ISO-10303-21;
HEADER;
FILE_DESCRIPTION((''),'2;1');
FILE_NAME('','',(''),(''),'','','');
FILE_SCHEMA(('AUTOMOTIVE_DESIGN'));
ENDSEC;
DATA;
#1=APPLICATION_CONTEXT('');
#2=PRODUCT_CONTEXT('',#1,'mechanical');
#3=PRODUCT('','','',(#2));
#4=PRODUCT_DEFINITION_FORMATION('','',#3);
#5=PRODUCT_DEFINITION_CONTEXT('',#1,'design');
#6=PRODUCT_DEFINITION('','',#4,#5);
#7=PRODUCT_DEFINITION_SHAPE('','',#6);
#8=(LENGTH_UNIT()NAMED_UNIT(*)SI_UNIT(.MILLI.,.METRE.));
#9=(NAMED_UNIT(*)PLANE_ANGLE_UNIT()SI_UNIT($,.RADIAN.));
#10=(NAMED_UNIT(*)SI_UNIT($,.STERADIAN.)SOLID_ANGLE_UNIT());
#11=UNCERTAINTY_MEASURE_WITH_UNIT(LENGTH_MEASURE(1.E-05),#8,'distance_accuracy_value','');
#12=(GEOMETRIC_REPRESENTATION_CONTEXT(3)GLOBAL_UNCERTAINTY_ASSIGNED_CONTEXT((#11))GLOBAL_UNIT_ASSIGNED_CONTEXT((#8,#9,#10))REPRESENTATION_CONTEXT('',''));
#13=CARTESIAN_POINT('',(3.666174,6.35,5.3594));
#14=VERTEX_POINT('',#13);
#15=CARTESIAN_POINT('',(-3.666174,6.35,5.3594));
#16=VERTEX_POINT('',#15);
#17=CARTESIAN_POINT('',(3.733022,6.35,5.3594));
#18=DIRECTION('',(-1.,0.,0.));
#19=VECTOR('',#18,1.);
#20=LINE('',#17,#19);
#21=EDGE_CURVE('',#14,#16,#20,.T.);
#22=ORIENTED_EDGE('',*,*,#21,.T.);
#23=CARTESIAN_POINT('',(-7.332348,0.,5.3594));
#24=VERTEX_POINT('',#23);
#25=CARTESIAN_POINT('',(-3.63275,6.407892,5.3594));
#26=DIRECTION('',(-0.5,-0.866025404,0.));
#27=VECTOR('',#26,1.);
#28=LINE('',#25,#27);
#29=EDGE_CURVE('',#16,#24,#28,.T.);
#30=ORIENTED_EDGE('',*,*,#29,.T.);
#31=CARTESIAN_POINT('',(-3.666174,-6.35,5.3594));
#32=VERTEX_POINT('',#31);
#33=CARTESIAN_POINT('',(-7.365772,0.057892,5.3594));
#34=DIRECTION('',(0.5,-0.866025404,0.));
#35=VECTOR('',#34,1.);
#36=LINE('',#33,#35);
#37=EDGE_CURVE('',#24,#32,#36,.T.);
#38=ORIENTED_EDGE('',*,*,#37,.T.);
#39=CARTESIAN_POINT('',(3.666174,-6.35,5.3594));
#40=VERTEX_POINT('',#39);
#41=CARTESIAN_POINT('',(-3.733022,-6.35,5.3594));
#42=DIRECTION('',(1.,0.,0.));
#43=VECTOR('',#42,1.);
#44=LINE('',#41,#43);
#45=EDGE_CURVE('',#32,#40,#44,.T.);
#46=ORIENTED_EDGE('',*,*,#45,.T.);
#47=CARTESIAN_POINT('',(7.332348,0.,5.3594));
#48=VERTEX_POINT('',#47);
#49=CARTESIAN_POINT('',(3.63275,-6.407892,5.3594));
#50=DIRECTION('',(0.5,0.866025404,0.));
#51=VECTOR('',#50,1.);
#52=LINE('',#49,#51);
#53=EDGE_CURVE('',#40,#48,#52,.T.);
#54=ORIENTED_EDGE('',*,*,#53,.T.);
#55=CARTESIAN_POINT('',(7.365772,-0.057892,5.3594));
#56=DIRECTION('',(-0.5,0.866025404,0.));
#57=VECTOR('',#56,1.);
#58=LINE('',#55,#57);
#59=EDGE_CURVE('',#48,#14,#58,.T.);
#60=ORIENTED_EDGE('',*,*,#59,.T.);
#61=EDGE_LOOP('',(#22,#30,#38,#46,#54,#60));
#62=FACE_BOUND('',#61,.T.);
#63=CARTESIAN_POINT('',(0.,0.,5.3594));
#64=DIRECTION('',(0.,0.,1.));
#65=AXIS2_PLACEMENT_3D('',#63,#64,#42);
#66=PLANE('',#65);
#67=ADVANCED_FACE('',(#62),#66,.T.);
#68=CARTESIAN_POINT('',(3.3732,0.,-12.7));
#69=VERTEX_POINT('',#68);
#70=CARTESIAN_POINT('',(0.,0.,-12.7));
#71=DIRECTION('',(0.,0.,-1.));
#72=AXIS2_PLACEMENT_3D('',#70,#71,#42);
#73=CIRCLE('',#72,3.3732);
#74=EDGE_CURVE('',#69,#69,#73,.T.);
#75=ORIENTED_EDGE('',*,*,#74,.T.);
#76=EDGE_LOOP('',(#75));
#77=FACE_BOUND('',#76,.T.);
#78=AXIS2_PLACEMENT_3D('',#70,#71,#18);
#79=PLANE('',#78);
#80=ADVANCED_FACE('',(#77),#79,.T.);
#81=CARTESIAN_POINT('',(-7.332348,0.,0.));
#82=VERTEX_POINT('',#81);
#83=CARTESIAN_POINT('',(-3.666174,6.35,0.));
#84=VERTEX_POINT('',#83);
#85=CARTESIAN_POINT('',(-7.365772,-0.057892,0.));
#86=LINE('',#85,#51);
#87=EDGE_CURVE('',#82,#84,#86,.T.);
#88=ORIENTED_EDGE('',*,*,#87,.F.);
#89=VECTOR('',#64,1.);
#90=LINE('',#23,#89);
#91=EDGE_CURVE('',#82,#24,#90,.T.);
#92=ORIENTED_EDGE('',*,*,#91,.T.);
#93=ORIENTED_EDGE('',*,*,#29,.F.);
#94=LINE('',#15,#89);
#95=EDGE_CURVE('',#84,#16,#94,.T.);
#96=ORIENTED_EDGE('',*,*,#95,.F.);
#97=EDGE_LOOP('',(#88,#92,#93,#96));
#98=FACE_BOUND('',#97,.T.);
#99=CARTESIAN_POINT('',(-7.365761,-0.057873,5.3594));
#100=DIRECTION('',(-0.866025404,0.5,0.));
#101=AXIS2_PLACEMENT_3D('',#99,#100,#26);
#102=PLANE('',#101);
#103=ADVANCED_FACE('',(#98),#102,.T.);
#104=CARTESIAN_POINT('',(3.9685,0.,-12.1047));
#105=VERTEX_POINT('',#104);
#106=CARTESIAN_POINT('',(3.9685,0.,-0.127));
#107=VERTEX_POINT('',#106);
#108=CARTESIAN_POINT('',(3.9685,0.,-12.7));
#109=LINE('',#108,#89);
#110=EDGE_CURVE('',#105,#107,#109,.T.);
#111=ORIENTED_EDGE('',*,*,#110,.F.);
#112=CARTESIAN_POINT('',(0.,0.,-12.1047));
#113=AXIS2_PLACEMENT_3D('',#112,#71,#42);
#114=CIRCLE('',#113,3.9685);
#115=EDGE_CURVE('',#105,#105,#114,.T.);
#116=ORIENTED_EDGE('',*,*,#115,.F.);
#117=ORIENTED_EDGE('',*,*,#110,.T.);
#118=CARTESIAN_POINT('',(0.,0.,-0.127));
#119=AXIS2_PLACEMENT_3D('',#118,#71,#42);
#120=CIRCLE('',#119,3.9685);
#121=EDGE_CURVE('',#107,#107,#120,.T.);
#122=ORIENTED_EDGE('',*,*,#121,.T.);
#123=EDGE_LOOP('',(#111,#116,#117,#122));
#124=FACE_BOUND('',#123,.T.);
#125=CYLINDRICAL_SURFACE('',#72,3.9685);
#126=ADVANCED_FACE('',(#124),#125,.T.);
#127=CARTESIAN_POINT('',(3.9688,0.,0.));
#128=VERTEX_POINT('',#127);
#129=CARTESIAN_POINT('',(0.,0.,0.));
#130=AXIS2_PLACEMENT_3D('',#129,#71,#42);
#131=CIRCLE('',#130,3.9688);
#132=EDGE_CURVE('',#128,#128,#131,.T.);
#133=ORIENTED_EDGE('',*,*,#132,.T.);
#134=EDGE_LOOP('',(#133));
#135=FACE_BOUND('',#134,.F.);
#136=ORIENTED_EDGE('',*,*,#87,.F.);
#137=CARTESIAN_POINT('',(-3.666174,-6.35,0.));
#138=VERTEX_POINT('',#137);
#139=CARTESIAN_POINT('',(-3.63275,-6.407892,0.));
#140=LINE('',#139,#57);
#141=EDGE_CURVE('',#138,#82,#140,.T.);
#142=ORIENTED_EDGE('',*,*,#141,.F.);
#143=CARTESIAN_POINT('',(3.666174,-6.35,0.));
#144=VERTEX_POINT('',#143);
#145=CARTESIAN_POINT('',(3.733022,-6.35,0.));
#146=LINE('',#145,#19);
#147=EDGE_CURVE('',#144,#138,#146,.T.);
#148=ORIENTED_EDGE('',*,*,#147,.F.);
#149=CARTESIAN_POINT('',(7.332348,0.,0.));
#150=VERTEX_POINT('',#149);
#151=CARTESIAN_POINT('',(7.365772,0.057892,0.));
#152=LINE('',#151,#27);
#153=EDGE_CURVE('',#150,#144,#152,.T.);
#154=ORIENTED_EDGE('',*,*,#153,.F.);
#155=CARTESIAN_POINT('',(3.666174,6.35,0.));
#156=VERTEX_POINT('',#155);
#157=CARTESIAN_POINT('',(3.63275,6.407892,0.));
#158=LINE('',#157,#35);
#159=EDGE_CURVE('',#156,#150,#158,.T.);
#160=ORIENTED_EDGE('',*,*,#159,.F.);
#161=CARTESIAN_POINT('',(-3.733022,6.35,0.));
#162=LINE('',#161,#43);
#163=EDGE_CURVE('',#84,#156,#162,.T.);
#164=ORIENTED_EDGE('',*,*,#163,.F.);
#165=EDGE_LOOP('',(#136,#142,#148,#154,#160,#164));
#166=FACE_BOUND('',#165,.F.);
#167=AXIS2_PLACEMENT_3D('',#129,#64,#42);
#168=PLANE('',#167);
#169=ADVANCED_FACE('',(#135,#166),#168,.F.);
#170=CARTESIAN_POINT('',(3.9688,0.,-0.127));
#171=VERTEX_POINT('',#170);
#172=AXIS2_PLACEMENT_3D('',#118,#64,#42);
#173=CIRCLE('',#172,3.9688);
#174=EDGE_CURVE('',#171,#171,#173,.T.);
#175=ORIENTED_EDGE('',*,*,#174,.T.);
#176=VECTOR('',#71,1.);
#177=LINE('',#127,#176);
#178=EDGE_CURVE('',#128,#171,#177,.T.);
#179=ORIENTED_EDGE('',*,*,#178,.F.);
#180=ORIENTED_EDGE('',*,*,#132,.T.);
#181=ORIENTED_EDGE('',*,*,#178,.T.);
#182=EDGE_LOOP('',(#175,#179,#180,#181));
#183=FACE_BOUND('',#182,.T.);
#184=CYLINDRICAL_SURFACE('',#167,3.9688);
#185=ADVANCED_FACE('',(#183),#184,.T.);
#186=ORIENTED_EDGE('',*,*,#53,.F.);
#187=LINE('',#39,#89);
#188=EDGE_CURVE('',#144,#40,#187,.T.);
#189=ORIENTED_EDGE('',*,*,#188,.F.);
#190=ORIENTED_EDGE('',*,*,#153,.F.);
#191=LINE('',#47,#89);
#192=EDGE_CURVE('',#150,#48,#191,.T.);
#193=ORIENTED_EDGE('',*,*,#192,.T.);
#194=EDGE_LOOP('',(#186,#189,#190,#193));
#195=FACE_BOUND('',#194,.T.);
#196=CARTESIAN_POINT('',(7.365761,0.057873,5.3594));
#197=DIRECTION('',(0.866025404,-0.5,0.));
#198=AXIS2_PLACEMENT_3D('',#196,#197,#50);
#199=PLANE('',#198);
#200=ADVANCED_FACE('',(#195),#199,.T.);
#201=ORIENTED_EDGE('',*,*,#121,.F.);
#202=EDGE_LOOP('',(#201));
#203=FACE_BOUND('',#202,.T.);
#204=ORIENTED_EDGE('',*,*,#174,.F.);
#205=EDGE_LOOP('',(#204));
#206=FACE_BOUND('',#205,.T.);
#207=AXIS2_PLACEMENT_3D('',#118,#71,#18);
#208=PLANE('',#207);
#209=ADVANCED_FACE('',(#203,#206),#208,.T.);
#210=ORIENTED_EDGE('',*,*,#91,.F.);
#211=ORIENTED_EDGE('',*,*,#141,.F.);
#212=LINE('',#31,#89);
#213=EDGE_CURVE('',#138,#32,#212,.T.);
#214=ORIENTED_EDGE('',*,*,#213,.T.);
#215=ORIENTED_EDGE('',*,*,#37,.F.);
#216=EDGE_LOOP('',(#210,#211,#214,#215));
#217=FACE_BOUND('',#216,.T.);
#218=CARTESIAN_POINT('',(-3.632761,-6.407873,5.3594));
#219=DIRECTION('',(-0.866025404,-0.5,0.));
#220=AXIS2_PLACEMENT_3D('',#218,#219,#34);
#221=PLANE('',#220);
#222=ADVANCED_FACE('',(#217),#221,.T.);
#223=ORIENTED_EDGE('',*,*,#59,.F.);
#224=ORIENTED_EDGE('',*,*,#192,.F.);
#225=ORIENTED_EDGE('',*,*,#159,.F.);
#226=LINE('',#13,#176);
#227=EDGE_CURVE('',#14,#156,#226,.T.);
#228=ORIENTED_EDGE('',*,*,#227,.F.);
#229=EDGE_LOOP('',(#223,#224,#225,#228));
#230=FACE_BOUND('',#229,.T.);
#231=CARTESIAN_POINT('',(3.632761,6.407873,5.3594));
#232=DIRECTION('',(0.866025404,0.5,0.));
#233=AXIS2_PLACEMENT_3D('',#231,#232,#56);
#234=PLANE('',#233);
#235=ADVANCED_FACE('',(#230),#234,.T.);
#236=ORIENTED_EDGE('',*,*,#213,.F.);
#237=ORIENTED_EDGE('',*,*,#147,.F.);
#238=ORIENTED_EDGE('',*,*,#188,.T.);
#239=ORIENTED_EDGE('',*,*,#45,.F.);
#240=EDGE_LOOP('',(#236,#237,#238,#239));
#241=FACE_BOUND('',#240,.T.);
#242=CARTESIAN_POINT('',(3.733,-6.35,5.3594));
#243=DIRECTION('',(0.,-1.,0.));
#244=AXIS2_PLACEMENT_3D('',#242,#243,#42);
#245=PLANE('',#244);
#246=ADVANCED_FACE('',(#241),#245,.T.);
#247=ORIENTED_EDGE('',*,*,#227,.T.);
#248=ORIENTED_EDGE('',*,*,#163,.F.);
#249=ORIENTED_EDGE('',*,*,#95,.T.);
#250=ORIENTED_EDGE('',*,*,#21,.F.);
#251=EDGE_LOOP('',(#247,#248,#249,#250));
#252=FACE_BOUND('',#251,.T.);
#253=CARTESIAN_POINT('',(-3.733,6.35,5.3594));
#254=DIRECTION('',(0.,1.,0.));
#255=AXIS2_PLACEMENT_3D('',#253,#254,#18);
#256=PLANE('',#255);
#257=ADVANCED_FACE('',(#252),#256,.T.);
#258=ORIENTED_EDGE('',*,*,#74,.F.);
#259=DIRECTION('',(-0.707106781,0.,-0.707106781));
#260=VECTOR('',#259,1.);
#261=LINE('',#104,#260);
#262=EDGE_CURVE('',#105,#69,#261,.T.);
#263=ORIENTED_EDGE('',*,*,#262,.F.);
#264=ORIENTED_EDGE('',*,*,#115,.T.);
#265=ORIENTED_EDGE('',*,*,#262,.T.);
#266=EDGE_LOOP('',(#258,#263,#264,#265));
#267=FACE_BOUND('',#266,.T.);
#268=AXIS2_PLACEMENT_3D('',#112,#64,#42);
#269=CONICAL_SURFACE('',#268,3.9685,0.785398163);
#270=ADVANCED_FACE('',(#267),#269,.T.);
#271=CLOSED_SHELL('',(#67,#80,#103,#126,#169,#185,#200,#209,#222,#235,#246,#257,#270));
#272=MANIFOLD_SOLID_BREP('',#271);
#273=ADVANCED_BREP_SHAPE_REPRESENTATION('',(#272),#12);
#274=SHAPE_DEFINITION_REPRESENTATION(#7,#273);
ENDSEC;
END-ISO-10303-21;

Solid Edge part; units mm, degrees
sketch "Sketch1" plane through (0, 0, 0) normal (0, 0, 1) x (1, 0, 0)
  circle A0 centre (0, 0) radius 7.366
  dimension "D1" = 14.732
extrude "Protrusion1" add sketch "Sketch1" along normal blind 5.3594
sketch "Sketch2" plane through (0, 0, 0) normal (0, 0, -1) x (1, 0, 0)
  circle A0 centre (0, 0) radius 3.9688
extrude "Protrusion2" add sketch "Sketch2" along normal blind 12.7
sketch "Sketch3" plane through (0, 0, -12.7) normal (0, 0, -1) x (1, 0, 0)
  circle A0 centre (0, 0) radius 3.9685
extrude "Cutout1" cut sketch "Sketch3" against normal blind 12.573 flip side to cut
chamfer "Chamfer_1" distance 0.5953 angle 45 1 edges at (-3.9685, 0, -12.7)
sketch "Sketch4" plane through (0, 0, 5.3594) normal (0, 0, 1) x (1, 0, 0)
  line L0 (-3.733, 6.35) -> (3.733, 6.35)
  dimension "D1" = 12.7
extrude "Cutout2" cut sketch "Sketch4" against normal up to next material side at (0, 6.4, 5.3594)
pattern_circular "Pattern1" count 6 over 360 about axis through (0, 0, 5.3594) along (0, 0, 1) of "Cutout2"
properties part number "24102346"
